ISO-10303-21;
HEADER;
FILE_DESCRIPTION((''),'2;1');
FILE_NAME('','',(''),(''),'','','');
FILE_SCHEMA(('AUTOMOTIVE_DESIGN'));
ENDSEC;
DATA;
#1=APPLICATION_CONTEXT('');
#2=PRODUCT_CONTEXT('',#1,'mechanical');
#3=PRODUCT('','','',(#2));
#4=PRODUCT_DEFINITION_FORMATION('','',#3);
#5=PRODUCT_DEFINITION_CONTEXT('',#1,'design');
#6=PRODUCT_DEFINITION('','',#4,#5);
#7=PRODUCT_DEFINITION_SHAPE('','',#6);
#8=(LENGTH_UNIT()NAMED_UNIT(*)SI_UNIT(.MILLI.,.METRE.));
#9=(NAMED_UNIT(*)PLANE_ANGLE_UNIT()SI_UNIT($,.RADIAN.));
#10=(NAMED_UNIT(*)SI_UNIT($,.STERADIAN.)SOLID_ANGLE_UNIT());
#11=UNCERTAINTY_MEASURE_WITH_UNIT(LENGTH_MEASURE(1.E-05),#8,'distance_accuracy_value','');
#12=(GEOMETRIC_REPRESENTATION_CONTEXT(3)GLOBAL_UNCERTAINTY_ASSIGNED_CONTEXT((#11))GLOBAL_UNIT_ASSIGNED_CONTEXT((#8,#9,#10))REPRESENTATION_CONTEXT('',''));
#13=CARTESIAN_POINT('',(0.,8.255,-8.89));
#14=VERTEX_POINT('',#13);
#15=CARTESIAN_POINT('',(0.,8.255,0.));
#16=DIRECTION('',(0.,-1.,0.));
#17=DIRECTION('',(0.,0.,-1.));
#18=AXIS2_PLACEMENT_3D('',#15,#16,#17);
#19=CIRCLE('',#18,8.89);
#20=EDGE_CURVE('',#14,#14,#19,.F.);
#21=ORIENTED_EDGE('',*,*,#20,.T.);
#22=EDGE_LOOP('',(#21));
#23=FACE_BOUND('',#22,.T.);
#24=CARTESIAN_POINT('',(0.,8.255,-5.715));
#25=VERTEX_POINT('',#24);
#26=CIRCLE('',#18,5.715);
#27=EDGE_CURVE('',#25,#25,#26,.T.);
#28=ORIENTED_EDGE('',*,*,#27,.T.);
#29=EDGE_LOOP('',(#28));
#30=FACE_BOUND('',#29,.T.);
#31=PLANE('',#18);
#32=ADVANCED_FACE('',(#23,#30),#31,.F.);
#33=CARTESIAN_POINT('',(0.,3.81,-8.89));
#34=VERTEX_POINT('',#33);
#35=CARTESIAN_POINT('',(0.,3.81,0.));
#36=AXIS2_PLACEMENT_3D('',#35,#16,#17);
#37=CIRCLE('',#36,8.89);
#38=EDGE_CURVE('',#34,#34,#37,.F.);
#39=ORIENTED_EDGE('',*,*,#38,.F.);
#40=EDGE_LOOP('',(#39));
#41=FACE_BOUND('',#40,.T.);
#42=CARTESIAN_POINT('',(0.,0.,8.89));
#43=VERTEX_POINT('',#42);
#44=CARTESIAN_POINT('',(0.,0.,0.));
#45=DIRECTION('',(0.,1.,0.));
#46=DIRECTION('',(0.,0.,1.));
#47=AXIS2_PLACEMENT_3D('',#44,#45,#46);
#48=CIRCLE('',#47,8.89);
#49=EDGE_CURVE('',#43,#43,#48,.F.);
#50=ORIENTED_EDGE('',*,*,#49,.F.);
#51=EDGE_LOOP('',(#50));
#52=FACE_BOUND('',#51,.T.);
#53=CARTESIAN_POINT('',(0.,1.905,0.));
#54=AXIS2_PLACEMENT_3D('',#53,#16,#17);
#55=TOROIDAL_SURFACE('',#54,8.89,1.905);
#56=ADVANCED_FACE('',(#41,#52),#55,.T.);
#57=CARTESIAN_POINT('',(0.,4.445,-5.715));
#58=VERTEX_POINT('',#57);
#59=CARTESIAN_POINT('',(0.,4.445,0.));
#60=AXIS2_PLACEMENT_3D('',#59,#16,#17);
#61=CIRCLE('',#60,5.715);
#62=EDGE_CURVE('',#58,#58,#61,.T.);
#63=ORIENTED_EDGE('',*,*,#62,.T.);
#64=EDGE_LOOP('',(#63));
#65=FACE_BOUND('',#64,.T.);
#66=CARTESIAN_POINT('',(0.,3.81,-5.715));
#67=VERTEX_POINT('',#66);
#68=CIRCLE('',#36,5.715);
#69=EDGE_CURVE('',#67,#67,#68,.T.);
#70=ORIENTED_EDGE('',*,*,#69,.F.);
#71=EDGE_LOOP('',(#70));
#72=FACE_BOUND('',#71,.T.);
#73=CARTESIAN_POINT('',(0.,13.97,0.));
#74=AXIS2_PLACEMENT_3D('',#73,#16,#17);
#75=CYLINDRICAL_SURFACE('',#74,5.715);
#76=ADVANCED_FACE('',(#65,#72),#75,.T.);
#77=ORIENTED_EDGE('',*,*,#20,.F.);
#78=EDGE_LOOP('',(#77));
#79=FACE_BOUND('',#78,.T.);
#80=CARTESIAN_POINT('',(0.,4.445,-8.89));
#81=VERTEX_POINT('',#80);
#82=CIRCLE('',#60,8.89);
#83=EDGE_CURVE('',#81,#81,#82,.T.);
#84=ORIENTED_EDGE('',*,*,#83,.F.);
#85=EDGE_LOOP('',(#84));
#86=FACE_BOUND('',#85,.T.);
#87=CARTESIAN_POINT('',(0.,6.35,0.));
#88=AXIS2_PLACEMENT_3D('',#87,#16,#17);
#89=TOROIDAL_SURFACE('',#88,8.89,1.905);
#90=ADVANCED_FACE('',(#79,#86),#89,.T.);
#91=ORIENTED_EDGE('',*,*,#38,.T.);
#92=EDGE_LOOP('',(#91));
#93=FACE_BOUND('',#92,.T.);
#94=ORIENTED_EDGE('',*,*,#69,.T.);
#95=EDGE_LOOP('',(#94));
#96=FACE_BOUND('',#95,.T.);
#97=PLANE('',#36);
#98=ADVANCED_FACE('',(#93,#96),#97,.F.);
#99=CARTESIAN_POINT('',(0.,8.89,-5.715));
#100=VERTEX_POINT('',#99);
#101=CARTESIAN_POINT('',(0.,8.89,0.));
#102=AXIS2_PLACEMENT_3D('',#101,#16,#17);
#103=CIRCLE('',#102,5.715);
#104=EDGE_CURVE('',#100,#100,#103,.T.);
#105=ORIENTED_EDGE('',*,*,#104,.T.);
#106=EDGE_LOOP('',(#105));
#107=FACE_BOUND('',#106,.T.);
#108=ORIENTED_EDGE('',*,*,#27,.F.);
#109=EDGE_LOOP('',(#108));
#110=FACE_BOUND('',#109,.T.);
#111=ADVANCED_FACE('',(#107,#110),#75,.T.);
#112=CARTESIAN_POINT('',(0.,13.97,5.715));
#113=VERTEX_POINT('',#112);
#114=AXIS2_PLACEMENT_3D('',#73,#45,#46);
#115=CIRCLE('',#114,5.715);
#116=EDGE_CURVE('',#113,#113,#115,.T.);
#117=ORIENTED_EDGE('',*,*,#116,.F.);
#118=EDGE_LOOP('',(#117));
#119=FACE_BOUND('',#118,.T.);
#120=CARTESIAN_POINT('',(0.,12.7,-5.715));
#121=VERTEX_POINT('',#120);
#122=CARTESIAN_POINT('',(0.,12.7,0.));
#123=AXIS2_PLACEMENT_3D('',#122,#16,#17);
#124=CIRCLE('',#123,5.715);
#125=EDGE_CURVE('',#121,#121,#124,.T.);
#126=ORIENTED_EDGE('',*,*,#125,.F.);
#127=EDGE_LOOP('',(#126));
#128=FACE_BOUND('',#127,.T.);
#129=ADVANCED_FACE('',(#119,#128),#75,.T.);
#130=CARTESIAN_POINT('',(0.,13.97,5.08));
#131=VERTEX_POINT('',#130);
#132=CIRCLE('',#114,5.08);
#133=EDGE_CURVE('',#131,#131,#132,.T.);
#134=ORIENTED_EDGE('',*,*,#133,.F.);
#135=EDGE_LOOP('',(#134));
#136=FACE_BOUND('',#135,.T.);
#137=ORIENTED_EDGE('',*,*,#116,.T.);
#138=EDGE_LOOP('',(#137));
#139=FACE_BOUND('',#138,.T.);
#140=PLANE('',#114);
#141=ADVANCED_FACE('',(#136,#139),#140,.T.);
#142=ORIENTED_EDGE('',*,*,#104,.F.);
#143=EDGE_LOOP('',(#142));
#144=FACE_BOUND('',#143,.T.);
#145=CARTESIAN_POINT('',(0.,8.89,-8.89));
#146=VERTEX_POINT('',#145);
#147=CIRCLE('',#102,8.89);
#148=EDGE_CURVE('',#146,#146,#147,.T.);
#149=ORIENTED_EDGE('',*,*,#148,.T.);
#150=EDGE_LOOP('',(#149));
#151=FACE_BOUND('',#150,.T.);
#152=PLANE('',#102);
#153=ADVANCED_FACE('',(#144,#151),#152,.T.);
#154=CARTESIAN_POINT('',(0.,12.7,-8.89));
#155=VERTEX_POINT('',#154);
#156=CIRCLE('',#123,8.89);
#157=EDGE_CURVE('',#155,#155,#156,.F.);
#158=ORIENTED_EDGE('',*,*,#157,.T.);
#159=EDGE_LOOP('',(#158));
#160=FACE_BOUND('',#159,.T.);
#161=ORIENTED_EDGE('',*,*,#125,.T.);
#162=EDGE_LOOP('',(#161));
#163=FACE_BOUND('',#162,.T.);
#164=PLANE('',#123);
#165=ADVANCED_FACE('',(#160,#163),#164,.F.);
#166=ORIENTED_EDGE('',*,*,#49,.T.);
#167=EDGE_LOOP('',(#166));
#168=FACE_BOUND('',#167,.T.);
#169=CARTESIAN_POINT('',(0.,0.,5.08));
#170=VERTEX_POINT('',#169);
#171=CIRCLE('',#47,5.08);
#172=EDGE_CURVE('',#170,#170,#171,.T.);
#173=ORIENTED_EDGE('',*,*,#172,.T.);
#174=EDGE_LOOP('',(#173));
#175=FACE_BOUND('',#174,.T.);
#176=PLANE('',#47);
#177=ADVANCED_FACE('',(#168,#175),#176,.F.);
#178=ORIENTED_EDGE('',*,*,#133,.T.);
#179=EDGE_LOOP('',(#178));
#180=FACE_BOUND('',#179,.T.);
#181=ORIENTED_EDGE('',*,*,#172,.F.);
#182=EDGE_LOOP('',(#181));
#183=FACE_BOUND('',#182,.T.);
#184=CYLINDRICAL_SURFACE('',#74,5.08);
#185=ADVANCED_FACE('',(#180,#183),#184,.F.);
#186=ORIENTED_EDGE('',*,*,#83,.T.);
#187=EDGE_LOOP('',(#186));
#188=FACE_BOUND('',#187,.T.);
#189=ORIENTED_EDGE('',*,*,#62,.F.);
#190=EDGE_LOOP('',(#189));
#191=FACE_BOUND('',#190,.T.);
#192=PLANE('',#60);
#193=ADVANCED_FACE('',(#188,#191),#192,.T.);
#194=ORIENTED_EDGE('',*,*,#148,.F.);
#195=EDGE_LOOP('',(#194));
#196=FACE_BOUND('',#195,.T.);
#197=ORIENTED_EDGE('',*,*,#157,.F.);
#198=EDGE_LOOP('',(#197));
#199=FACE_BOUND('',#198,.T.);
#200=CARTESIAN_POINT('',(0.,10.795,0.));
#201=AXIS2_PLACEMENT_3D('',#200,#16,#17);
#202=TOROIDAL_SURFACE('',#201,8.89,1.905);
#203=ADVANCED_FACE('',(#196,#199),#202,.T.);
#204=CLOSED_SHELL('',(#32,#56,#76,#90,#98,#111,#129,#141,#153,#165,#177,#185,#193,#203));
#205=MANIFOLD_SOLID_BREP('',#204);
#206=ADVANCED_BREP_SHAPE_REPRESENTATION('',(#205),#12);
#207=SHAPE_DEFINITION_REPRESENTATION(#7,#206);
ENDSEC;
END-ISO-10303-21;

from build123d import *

# Parameters (mm, degrees)
SKETCH1_R           = 5.715
SKETCH1_R_2         = 5.08
BOSS_EXTRUDE1_DEPTH = 13.97
SKETCH2_R           = 10.795
SKETCH2_R_2         = 5.715
BOSS_EXTRUDE2_DEPTH = 3.81
LPATTERN1_COUNT     = 3
LPATTERN1_PITCH     = 4.445
FILLET1_R           = 1.905
FILLET2_R           = 1.905
FILLET3_R           = 1.905


with BuildPart() as part:
    # Sketch1 → Boss-Extrude1 (new body)
    with BuildSketch(Plane(origin=(0, 0, 0), x_dir=(1, 0, 0), z_dir=(0, 1, 0))):
        with Locations(Location((0, 0, 0), (0, 0, 270))):
            Circle(SKETCH1_R)
        with Locations(Location((0, 0, 0), (0, 0, 270))):
            Circle(SKETCH1_R_2, mode=Mode.SUBTRACT)
    extrude(amount=BOSS_EXTRUDE1_DEPTH)

    # Sketch2 → Boss-Extrude2 (add)
    with BuildSketch(Plane.XZ):
        with Locations(Location((0, 0, 0), (0, 0, 270))):
            Circle(SKETCH2_R)
        with Locations(Location((0, 0, 0), (0, 0, 270))):
            Circle(SKETCH2_R_2, mode=Mode.SUBTRACT)
    boss_extrude2 = extrude(amount=-BOSS_EXTRUDE2_DEPTH)

    # LPattern1: Boss-Extrude2 ×3
    with Locations(*[(0, i * LPATTERN1_PITCH, 0) for i in range(1, LPATTERN1_COUNT)]):
        add(boss_extrude2)

    # Fillet1
    fillet1_edges = [part.edges().sort_by_distance(p)[0] for p in [
        (0, 3.81, 10.795),
        (0, 0, 10.795),
    ]]
    fillet(fillet1_edges, radius=FILLET1_R - 0.0001)  # a hair under: the kernel refuses the full size

    # Fillet2
    fillet2_edges = [part.edges().sort_by_distance(p)[0] for p in [
        (0, 8.255, 10.795),
        (0, 4.445, 10.795),
    ]]
    fillet(fillet2_edges, radius=FILLET2_R - 0.0001)  # a hair under: the kernel refuses the full size

    # Fillet3
    fillet3_edges = [part.edges().sort_by_distance(p)[0] for p in [
        (0, 12.7, 10.795),
        (0, 8.89, 10.795),
    ]]
    fillet(fillet3_edges, radius=FILLET3_R - 0.0001)  # a hair under: the kernel refuses the full size


solid = part.part
